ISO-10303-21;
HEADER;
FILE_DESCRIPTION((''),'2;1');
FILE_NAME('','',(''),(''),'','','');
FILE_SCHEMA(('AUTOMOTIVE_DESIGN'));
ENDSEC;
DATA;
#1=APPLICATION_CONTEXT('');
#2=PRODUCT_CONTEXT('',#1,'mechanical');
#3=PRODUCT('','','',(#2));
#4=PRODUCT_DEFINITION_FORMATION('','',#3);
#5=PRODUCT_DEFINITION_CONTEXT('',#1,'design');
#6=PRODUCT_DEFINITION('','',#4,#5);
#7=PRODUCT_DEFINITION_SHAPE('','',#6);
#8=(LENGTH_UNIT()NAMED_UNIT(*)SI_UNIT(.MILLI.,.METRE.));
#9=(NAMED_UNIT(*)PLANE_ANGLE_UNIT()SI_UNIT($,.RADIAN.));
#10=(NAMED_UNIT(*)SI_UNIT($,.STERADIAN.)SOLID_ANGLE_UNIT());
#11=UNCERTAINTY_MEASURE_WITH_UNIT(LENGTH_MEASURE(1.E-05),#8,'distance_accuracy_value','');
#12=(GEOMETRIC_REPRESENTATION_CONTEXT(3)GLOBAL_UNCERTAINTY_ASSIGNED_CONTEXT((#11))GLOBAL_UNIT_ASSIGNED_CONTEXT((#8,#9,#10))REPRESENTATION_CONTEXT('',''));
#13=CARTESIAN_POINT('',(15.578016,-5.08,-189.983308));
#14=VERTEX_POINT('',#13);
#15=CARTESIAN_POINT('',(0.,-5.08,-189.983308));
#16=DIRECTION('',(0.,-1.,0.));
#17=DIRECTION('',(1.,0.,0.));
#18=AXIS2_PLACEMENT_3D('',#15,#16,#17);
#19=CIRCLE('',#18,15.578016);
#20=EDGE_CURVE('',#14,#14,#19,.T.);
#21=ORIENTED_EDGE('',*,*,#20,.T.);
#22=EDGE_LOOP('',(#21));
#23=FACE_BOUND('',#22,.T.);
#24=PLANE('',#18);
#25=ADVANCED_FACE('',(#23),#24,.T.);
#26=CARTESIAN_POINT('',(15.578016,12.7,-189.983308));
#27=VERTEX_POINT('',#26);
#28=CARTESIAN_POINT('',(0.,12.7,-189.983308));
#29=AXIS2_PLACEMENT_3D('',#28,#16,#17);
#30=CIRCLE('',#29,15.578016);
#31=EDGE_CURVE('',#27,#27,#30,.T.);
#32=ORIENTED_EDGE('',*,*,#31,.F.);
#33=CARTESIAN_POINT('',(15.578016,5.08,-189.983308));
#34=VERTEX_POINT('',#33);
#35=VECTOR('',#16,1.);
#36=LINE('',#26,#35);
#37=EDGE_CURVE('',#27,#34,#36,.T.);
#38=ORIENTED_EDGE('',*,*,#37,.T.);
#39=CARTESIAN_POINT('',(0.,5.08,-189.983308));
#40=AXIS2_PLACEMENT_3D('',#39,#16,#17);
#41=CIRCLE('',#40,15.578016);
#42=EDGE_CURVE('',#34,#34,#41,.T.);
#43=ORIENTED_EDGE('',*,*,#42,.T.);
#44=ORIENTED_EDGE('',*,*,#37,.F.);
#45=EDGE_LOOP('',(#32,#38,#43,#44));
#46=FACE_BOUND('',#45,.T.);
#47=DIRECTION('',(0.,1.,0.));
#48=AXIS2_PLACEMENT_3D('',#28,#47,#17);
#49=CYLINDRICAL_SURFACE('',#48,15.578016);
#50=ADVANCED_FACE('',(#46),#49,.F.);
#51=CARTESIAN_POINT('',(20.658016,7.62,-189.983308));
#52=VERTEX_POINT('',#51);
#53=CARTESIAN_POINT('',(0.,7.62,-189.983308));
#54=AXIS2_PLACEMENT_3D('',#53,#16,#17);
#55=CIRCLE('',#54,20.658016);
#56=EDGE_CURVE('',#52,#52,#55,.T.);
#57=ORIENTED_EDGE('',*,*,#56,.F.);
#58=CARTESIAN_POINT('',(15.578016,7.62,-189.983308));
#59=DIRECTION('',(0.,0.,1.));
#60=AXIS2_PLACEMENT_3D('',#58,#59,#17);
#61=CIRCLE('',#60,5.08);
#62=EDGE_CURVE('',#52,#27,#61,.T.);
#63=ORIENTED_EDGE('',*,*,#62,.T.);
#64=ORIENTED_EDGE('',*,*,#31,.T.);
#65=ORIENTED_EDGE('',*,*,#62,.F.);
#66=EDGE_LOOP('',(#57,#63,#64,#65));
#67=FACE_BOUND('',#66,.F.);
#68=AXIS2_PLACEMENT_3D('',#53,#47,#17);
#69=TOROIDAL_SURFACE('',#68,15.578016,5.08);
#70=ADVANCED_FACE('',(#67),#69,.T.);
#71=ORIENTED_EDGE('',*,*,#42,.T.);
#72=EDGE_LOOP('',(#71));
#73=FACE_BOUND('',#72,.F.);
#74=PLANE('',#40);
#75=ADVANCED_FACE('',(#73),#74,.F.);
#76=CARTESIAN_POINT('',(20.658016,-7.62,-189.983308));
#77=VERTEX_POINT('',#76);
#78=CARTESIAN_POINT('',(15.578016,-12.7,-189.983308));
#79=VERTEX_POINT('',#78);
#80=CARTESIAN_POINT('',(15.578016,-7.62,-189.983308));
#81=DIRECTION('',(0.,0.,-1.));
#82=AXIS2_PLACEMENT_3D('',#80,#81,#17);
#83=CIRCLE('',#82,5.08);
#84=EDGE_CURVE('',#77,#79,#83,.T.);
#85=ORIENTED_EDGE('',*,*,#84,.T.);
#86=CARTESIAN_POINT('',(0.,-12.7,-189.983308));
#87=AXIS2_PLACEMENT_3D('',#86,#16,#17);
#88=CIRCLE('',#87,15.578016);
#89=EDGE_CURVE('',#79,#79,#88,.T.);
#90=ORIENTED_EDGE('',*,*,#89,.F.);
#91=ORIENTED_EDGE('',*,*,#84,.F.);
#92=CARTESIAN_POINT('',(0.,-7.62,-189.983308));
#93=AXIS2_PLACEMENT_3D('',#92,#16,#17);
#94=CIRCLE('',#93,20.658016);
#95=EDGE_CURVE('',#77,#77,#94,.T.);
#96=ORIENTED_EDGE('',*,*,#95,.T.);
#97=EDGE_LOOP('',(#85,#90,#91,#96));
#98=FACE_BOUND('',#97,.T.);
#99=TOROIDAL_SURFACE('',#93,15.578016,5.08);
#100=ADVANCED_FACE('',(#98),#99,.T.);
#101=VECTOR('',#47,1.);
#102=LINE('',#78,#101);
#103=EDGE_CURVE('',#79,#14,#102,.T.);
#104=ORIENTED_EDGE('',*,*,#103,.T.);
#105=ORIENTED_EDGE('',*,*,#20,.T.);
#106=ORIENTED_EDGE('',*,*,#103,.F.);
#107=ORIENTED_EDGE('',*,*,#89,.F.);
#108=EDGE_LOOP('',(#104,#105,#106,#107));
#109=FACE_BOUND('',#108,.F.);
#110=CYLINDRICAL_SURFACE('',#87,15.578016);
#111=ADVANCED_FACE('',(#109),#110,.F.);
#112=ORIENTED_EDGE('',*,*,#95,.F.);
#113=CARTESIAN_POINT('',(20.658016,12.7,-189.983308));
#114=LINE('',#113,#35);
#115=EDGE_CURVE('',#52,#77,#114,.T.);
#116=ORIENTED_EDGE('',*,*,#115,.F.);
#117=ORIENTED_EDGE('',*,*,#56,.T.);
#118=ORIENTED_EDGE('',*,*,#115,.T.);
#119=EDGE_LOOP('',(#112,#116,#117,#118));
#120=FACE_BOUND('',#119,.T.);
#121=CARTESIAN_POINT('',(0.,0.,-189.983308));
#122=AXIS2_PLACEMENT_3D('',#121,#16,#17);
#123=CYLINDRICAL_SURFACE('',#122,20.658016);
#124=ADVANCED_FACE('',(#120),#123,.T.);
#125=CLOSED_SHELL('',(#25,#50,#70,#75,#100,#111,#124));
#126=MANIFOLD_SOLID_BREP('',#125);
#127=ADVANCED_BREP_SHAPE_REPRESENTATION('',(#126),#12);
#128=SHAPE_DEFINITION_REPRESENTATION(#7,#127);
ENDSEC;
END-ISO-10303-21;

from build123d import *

# Parameters (mm, degrees)
F4_R     = 20.6580157973
F5_DEPTH = 12.7
F6_DEPTH = 12.7
F7_R     = 5.08
F8_DEPTH = 7.62
F9_DEPTH = 7.62


# Not quite as in the source:
# - a feature of the source that left no trace in its solid (it failed there, or was rolled back) is left out


with BuildPart() as f5:
    # F4 (on Front) → F5 (new body)
    with BuildSketch(Plane.XZ):
        with Locations((0, -189.9833083153)):
            Circle(F4_R)
    extrude(amount=F5_DEPTH)

    # F6 (add): a face of the model
    f6_faces = [f5.faces().sort_by_distance(p)[0] for p in [
        (0, 0, -189.9833083153),
    ]]
    extrude(f6_faces, amount=F6_DEPTH)

    # F7
    f7_edges = [f5.edges().sort_by_distance(p)[0] for p in [
        (-20.658016, -12.7, -189.983308),
        (-20.658016, 12.7, -189.983308),
    ]]
    fillet(f7_edges, radius=F7_R)

    # F8 (cut): a face of the model
    f8_faces = [f5.faces().sort_by_distance(p)[0] for p in [
        (0, -12.7, -189.9833083153),
    ]]
    extrude(f8_faces, amount=-F8_DEPTH, mode=Mode.SUBTRACT)

    # F9 (cut): a face of the model
    f9_faces = [f5.faces().sort_by_distance(p)[0] for p in [
        (0, 12.7, -189.9833083153),
    ]]
    extrude(f9_faces, amount=-F9_DEPTH, mode=Mode.SUBTRACT)


solid = f5.part
